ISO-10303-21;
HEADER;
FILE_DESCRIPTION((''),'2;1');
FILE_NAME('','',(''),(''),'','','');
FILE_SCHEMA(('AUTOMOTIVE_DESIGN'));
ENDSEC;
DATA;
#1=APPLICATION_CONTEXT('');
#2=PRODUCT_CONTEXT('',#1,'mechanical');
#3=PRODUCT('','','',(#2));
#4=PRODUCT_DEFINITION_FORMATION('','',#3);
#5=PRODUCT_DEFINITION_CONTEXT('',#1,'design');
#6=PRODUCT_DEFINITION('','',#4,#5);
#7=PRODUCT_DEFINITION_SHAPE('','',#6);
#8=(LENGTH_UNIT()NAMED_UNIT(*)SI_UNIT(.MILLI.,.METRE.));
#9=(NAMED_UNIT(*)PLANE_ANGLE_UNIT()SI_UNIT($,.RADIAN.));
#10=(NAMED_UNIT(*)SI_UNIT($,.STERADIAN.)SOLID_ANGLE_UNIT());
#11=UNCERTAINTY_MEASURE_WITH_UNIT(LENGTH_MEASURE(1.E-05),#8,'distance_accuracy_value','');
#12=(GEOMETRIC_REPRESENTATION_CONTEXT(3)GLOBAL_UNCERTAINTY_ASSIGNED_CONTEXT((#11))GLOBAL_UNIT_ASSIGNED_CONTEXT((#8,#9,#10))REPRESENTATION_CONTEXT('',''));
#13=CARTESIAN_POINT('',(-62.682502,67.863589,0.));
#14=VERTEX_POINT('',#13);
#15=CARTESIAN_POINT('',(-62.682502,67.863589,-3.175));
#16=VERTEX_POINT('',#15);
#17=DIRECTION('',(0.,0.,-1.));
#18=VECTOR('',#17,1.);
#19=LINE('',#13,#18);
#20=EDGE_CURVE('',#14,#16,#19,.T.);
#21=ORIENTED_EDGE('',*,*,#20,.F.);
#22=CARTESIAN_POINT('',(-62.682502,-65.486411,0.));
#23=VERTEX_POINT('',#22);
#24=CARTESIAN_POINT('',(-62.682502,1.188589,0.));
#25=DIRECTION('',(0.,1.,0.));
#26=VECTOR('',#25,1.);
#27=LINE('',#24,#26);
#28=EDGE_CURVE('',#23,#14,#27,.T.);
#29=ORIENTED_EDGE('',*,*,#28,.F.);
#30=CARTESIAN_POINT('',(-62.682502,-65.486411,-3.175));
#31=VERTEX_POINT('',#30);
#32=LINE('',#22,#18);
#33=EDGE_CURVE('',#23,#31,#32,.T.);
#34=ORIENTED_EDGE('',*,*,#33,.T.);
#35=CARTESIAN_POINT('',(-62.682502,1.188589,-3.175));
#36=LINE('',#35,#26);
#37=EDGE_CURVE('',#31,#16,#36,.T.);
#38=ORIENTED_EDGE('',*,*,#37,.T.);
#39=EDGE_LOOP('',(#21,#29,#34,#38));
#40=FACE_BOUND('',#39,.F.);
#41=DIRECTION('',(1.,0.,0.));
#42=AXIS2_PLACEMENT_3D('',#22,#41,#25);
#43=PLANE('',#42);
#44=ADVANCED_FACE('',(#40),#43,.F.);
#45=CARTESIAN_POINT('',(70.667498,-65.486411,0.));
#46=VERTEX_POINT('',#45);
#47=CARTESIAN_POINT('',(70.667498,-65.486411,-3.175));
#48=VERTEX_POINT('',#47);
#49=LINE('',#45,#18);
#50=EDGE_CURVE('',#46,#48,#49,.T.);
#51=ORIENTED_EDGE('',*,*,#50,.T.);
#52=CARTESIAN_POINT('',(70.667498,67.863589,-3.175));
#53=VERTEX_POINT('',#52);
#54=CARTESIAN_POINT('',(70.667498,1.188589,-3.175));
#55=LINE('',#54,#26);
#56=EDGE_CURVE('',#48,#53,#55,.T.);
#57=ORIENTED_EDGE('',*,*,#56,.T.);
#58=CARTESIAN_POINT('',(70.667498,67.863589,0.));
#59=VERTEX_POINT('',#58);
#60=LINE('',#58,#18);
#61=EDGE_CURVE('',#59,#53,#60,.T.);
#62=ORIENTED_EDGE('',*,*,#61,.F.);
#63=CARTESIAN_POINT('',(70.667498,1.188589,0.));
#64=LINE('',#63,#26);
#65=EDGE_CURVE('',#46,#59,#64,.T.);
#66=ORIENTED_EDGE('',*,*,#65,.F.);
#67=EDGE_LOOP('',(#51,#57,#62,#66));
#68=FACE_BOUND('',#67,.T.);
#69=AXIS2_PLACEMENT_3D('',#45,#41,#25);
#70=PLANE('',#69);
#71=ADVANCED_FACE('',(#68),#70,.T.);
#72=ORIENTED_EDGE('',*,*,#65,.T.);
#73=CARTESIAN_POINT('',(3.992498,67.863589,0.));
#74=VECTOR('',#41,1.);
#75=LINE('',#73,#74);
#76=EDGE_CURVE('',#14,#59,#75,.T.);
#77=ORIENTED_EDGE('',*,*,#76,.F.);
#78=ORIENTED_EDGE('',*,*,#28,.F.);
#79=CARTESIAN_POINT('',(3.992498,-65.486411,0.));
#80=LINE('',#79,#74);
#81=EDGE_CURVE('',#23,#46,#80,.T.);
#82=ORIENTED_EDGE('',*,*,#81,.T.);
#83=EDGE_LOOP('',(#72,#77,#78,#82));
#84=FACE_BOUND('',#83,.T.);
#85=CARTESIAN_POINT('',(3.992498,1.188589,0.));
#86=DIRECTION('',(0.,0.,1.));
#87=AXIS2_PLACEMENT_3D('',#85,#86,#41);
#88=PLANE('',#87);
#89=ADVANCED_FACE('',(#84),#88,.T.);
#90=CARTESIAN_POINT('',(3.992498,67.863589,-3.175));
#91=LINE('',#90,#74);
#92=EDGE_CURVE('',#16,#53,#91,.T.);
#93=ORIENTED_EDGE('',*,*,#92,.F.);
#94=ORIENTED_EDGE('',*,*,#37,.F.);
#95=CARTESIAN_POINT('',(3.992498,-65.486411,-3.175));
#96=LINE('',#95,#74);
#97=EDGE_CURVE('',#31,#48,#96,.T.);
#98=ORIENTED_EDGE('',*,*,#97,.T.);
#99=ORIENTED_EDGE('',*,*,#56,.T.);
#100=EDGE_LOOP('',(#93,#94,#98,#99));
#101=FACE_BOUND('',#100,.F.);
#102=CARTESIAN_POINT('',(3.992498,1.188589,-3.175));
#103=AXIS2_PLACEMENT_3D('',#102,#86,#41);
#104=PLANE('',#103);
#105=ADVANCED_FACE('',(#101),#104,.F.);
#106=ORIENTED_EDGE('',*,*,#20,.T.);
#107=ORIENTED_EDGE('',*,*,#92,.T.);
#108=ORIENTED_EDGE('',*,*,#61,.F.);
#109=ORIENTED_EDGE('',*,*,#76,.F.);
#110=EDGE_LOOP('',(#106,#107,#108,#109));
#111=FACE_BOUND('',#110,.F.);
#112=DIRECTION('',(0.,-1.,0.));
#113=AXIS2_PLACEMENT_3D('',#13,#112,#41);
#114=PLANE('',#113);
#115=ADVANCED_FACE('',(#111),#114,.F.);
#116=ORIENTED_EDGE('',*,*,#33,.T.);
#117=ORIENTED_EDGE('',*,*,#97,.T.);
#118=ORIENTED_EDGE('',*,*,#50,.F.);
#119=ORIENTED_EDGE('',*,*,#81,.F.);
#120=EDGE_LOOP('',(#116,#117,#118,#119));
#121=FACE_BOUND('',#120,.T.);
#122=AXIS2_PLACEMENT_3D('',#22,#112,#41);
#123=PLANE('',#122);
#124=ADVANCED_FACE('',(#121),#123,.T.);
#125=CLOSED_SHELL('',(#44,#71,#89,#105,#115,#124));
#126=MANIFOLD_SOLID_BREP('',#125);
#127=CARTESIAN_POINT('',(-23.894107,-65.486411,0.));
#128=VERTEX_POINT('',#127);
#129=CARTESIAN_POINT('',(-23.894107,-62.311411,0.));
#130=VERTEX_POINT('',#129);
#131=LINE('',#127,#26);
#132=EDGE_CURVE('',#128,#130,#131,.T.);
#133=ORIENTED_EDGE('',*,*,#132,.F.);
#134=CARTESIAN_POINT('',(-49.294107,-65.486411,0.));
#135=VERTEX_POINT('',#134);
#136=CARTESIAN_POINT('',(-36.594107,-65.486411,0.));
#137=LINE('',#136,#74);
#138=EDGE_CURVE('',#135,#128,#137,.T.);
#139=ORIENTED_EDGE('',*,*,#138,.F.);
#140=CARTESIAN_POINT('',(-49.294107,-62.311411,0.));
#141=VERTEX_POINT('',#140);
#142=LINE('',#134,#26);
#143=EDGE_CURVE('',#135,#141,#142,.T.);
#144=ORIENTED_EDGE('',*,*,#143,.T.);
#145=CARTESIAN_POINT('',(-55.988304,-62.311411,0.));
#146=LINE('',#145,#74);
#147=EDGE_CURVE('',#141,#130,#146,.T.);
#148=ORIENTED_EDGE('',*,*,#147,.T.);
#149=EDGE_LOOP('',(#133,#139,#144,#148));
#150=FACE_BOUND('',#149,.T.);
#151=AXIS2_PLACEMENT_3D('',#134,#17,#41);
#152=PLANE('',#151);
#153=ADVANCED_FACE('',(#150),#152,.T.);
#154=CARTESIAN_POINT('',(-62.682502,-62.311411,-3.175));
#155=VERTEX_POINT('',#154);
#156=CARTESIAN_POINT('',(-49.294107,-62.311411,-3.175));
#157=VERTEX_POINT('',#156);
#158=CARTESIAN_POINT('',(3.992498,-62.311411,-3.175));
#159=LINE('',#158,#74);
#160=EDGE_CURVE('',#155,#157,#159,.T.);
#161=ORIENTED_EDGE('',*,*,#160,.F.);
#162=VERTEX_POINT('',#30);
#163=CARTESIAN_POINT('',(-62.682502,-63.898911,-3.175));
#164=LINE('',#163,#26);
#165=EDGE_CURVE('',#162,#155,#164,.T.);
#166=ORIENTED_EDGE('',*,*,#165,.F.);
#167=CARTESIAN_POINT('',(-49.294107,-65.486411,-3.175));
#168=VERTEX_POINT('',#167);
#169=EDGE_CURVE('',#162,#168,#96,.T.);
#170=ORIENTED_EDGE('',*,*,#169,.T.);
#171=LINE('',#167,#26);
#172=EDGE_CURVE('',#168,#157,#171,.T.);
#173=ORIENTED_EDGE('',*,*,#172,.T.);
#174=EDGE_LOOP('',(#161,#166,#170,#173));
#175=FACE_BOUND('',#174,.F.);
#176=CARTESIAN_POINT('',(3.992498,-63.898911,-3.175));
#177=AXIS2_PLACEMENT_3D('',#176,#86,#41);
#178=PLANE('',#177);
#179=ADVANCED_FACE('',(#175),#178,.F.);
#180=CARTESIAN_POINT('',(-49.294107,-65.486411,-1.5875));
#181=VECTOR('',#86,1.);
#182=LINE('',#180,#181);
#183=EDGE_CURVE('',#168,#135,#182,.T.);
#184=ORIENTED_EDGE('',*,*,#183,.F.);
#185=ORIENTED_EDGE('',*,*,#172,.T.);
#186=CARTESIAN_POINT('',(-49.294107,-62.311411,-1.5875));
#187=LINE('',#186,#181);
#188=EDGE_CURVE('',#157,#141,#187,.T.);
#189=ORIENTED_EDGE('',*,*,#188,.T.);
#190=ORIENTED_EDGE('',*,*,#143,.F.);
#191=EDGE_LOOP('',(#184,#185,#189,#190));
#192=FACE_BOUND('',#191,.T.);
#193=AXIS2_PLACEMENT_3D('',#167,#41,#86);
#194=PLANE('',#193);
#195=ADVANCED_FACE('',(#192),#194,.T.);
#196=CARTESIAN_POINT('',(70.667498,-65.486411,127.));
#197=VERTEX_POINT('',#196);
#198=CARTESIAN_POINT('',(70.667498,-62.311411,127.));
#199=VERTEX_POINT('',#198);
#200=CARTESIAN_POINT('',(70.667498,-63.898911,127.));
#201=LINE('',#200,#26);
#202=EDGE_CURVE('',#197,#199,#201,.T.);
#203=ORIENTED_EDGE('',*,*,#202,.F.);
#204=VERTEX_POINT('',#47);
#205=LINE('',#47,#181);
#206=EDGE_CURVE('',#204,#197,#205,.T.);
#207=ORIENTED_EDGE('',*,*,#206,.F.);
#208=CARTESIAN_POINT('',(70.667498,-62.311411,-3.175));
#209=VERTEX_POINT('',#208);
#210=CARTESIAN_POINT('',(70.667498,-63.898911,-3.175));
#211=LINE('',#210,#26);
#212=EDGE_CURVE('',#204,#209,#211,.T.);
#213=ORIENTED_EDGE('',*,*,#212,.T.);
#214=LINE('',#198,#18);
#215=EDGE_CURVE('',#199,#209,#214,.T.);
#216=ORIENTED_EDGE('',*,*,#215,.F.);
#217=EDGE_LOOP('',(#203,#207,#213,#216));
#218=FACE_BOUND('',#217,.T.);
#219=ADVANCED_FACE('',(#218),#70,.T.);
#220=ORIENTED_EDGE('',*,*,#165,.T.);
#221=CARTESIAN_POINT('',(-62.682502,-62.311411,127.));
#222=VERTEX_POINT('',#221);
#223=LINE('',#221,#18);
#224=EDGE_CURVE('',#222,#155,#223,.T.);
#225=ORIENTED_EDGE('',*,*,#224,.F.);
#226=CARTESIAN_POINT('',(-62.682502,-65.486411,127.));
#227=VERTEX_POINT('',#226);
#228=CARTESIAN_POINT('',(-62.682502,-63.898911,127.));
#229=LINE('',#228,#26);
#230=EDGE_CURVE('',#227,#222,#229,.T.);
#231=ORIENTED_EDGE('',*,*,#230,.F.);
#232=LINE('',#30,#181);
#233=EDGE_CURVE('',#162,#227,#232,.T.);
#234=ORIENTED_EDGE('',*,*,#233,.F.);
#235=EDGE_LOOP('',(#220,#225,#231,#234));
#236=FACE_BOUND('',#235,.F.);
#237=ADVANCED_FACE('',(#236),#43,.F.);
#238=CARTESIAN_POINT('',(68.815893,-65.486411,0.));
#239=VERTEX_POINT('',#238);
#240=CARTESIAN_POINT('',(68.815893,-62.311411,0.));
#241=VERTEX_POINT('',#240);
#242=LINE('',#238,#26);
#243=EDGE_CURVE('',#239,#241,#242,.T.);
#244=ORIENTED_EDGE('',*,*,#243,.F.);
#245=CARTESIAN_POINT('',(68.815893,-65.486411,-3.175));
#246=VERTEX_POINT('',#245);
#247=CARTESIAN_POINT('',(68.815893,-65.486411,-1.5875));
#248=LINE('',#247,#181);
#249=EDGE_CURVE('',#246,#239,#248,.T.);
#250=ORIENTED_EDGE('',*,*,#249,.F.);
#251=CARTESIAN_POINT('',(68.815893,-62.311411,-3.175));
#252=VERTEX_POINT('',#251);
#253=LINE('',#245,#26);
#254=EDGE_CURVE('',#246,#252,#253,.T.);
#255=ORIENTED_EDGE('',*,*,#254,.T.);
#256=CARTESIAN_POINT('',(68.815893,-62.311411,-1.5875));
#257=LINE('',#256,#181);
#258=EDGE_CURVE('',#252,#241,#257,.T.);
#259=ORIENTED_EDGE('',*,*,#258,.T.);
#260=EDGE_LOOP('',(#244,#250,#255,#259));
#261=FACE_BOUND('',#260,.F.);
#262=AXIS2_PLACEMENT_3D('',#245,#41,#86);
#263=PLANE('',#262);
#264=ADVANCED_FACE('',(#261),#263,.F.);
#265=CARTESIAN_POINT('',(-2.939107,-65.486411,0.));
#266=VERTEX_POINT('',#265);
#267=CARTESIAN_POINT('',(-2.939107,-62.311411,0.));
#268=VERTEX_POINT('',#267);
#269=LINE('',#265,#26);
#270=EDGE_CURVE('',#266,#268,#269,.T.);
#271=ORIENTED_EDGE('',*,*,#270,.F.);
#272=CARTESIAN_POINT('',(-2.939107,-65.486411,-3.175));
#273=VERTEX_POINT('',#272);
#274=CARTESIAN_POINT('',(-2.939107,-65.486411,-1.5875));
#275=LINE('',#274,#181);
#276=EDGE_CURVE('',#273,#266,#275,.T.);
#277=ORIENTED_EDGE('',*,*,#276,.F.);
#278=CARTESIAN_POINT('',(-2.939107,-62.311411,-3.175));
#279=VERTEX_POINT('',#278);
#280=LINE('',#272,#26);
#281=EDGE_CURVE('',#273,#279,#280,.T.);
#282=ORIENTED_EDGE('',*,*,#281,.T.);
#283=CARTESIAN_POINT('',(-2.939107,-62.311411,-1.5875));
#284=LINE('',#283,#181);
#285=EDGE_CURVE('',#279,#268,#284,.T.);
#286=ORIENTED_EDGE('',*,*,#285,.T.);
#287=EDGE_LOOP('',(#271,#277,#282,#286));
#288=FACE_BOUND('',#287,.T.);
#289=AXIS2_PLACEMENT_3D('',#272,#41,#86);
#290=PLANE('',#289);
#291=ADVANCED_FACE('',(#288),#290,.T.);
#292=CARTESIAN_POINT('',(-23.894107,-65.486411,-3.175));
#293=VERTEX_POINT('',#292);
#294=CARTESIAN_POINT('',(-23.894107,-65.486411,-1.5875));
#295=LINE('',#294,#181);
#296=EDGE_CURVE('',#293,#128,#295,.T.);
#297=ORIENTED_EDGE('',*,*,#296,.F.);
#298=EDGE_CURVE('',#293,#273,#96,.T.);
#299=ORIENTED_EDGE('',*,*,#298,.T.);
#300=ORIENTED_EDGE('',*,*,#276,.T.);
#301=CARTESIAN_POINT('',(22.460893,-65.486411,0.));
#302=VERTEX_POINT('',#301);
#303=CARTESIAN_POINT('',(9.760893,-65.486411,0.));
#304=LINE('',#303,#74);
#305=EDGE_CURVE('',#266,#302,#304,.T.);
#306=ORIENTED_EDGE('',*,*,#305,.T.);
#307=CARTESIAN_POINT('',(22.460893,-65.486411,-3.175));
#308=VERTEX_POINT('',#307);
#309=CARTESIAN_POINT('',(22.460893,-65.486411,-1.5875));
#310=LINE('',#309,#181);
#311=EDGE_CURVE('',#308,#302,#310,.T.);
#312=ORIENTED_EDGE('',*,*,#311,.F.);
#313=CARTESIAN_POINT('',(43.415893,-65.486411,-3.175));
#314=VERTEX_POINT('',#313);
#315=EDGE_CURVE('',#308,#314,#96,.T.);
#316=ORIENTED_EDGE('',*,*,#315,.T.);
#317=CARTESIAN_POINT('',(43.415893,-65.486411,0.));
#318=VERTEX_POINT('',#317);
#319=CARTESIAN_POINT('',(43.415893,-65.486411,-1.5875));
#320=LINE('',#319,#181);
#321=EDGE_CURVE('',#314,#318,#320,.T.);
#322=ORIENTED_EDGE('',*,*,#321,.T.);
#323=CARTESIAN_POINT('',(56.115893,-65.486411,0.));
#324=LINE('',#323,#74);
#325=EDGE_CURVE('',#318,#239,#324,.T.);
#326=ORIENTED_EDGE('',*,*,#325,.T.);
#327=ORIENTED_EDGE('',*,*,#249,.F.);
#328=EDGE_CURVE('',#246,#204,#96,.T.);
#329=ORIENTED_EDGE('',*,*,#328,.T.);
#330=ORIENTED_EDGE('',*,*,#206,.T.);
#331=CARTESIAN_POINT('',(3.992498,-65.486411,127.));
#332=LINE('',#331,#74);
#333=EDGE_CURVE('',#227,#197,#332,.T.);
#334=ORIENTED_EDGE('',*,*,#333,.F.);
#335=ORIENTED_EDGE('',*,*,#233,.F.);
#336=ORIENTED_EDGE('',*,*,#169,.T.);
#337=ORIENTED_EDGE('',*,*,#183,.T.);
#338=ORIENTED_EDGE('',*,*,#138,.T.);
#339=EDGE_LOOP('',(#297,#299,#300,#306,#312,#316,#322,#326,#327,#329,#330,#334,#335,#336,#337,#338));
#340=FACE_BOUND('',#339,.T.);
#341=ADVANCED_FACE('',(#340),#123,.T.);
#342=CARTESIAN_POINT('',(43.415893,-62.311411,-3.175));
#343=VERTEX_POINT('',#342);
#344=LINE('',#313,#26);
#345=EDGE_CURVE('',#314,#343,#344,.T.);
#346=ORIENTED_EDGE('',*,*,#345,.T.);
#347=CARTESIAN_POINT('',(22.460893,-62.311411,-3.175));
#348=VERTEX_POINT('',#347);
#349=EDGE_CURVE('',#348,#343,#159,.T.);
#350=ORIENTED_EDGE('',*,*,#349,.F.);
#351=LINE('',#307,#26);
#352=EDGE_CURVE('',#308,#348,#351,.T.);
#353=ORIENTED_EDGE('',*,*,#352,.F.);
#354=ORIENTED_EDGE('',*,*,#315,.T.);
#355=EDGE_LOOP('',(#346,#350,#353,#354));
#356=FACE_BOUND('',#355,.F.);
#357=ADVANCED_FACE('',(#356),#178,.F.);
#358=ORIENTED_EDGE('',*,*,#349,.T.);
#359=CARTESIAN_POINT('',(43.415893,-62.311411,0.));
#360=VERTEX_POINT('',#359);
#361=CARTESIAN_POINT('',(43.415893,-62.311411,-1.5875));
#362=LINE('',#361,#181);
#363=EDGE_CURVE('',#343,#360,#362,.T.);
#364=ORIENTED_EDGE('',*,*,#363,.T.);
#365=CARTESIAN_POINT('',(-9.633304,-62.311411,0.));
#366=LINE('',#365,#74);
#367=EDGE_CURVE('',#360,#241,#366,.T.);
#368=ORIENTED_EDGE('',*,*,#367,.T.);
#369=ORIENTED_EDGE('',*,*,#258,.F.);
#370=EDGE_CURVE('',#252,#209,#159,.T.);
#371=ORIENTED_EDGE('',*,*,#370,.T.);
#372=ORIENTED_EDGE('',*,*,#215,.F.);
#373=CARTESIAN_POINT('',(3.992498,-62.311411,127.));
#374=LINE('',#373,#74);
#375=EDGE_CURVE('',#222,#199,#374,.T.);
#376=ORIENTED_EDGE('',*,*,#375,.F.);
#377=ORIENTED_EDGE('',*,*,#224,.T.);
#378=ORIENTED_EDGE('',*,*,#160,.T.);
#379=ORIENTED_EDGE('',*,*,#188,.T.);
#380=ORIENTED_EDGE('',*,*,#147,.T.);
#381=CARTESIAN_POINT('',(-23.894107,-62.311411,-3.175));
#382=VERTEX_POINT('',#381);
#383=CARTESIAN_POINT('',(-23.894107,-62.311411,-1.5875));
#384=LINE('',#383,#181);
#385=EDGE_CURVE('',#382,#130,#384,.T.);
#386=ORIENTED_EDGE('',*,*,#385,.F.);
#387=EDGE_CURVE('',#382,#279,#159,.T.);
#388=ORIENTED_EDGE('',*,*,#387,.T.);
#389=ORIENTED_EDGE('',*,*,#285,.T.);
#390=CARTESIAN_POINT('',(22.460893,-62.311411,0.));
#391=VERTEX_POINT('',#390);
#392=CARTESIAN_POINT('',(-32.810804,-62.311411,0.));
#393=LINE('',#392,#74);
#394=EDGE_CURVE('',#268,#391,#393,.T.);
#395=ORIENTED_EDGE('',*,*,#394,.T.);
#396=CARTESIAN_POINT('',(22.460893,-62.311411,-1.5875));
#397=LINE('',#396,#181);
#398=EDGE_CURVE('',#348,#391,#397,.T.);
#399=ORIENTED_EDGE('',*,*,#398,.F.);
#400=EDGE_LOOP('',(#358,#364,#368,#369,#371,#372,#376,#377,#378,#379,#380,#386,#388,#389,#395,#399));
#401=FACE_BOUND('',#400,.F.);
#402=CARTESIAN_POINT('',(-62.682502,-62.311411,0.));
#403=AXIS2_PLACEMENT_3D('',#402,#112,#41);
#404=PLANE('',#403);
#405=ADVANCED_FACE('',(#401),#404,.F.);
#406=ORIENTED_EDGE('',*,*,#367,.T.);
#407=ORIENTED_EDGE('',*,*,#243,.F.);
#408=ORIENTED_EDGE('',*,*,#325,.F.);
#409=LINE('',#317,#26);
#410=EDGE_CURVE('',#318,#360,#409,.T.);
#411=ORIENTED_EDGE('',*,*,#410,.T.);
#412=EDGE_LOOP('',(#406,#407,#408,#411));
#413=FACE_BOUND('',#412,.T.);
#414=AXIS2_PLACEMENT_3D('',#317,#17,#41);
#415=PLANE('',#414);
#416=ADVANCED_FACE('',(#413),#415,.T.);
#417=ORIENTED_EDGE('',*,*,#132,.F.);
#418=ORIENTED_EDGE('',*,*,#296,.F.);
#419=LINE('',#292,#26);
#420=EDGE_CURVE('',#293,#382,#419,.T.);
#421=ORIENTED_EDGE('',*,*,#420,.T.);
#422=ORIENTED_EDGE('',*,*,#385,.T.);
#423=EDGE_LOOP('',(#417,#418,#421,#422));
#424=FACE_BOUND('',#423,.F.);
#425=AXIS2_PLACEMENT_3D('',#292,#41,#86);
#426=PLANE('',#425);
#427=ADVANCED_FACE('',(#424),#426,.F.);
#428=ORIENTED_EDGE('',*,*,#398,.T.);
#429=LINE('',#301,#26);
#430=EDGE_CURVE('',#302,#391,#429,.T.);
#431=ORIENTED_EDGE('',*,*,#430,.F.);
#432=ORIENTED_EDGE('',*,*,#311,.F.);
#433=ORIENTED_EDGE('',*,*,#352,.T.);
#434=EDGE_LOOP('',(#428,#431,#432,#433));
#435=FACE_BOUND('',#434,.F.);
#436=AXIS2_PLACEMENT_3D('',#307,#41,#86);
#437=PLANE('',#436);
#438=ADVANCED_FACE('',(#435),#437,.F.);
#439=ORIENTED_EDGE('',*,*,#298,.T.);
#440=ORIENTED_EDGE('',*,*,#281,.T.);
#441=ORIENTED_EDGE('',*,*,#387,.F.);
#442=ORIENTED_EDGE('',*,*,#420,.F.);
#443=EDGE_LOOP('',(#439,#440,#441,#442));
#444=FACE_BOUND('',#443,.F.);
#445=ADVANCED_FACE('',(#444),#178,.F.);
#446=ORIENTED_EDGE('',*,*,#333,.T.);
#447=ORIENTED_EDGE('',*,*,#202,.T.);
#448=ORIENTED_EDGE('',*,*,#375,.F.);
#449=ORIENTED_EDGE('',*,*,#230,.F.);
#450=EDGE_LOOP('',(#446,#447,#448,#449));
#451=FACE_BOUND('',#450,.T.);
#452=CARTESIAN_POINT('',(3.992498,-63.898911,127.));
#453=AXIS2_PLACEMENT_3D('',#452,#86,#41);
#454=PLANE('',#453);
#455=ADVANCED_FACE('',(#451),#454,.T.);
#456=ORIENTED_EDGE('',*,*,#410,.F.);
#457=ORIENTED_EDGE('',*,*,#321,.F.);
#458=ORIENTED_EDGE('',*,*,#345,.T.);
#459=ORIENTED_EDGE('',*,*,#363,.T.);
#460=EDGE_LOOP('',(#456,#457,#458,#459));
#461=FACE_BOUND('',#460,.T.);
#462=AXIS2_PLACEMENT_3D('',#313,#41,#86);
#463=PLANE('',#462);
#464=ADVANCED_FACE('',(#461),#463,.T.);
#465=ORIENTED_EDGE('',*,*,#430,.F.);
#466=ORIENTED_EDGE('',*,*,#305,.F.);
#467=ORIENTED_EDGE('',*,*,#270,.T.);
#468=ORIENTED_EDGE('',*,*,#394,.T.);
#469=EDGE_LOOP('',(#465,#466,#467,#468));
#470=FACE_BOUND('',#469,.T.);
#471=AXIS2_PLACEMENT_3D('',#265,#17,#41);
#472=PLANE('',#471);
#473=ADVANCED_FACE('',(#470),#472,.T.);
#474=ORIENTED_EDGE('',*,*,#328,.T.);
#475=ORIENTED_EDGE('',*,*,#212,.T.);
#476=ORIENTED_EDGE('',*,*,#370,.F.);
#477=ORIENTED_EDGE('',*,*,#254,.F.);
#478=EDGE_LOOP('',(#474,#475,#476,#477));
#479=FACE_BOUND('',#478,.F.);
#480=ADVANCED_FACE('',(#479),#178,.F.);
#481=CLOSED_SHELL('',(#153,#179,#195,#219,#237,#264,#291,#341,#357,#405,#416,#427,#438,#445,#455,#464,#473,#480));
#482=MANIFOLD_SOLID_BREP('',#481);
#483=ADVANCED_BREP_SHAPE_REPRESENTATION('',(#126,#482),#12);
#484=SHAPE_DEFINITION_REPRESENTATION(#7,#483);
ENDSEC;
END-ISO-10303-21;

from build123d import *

# Parameters (mm, degrees)
F0_W          = 133.35
F0_H          = 133.35
F1_DEPTH      = 3.175
F2_W          = 133.35
F2_H          = 3.175
F3_DEPTH      = 127
F3_DEPTH_BACK = 3.175
F4_W          = 25.4
F4_H          = 3.175
F5_DEPTH      = 25.4


# Not quite as in the source:
# - a length typed as a fraction of an inch, garbled in the dataset ("3 / 203.2 mm" for 3/8 in), is restored


with BuildPart() as f1:
    # F0 (on Top) → F1 (new body)
    with BuildSketch(Plane.XY):
        with Locations((3.992497921, 1.1885885367)):
            Rectangle(F0_W, F0_H)
    extrude(amount=-F1_DEPTH)


with BuildPart() as f3:
    # F2 (on Top) → F3 (new body, two sides)
    with BuildSketch(Plane.XY) as f3_sk:
        with Locations((3.992497921, -63.8989114633)):
            Rectangle(F2_W, F2_H)
    extrude(amount=F3_DEPTH)
    extrude(f3_sk.sketch, amount=-F3_DEPTH_BACK)

    # F4 (on face) → F5 (cut)
    with BuildSketch(Plane.XZ.offset(65.4864114633)):
        with Locations((-36.5941066623, -1.5875)):
            Rectangle(F4_W, F4_H)
        with Locations((9.7608933377, -1.5875)):
            Rectangle(F4_W, F4_H)
        with Locations((56.1158933377, -1.5875)):
            Rectangle(F4_W, F4_H)
    extrude(amount=-F5_DEPTH, mode=Mode.SUBTRACT)


solid = Compound([f1.part, f3.part])
